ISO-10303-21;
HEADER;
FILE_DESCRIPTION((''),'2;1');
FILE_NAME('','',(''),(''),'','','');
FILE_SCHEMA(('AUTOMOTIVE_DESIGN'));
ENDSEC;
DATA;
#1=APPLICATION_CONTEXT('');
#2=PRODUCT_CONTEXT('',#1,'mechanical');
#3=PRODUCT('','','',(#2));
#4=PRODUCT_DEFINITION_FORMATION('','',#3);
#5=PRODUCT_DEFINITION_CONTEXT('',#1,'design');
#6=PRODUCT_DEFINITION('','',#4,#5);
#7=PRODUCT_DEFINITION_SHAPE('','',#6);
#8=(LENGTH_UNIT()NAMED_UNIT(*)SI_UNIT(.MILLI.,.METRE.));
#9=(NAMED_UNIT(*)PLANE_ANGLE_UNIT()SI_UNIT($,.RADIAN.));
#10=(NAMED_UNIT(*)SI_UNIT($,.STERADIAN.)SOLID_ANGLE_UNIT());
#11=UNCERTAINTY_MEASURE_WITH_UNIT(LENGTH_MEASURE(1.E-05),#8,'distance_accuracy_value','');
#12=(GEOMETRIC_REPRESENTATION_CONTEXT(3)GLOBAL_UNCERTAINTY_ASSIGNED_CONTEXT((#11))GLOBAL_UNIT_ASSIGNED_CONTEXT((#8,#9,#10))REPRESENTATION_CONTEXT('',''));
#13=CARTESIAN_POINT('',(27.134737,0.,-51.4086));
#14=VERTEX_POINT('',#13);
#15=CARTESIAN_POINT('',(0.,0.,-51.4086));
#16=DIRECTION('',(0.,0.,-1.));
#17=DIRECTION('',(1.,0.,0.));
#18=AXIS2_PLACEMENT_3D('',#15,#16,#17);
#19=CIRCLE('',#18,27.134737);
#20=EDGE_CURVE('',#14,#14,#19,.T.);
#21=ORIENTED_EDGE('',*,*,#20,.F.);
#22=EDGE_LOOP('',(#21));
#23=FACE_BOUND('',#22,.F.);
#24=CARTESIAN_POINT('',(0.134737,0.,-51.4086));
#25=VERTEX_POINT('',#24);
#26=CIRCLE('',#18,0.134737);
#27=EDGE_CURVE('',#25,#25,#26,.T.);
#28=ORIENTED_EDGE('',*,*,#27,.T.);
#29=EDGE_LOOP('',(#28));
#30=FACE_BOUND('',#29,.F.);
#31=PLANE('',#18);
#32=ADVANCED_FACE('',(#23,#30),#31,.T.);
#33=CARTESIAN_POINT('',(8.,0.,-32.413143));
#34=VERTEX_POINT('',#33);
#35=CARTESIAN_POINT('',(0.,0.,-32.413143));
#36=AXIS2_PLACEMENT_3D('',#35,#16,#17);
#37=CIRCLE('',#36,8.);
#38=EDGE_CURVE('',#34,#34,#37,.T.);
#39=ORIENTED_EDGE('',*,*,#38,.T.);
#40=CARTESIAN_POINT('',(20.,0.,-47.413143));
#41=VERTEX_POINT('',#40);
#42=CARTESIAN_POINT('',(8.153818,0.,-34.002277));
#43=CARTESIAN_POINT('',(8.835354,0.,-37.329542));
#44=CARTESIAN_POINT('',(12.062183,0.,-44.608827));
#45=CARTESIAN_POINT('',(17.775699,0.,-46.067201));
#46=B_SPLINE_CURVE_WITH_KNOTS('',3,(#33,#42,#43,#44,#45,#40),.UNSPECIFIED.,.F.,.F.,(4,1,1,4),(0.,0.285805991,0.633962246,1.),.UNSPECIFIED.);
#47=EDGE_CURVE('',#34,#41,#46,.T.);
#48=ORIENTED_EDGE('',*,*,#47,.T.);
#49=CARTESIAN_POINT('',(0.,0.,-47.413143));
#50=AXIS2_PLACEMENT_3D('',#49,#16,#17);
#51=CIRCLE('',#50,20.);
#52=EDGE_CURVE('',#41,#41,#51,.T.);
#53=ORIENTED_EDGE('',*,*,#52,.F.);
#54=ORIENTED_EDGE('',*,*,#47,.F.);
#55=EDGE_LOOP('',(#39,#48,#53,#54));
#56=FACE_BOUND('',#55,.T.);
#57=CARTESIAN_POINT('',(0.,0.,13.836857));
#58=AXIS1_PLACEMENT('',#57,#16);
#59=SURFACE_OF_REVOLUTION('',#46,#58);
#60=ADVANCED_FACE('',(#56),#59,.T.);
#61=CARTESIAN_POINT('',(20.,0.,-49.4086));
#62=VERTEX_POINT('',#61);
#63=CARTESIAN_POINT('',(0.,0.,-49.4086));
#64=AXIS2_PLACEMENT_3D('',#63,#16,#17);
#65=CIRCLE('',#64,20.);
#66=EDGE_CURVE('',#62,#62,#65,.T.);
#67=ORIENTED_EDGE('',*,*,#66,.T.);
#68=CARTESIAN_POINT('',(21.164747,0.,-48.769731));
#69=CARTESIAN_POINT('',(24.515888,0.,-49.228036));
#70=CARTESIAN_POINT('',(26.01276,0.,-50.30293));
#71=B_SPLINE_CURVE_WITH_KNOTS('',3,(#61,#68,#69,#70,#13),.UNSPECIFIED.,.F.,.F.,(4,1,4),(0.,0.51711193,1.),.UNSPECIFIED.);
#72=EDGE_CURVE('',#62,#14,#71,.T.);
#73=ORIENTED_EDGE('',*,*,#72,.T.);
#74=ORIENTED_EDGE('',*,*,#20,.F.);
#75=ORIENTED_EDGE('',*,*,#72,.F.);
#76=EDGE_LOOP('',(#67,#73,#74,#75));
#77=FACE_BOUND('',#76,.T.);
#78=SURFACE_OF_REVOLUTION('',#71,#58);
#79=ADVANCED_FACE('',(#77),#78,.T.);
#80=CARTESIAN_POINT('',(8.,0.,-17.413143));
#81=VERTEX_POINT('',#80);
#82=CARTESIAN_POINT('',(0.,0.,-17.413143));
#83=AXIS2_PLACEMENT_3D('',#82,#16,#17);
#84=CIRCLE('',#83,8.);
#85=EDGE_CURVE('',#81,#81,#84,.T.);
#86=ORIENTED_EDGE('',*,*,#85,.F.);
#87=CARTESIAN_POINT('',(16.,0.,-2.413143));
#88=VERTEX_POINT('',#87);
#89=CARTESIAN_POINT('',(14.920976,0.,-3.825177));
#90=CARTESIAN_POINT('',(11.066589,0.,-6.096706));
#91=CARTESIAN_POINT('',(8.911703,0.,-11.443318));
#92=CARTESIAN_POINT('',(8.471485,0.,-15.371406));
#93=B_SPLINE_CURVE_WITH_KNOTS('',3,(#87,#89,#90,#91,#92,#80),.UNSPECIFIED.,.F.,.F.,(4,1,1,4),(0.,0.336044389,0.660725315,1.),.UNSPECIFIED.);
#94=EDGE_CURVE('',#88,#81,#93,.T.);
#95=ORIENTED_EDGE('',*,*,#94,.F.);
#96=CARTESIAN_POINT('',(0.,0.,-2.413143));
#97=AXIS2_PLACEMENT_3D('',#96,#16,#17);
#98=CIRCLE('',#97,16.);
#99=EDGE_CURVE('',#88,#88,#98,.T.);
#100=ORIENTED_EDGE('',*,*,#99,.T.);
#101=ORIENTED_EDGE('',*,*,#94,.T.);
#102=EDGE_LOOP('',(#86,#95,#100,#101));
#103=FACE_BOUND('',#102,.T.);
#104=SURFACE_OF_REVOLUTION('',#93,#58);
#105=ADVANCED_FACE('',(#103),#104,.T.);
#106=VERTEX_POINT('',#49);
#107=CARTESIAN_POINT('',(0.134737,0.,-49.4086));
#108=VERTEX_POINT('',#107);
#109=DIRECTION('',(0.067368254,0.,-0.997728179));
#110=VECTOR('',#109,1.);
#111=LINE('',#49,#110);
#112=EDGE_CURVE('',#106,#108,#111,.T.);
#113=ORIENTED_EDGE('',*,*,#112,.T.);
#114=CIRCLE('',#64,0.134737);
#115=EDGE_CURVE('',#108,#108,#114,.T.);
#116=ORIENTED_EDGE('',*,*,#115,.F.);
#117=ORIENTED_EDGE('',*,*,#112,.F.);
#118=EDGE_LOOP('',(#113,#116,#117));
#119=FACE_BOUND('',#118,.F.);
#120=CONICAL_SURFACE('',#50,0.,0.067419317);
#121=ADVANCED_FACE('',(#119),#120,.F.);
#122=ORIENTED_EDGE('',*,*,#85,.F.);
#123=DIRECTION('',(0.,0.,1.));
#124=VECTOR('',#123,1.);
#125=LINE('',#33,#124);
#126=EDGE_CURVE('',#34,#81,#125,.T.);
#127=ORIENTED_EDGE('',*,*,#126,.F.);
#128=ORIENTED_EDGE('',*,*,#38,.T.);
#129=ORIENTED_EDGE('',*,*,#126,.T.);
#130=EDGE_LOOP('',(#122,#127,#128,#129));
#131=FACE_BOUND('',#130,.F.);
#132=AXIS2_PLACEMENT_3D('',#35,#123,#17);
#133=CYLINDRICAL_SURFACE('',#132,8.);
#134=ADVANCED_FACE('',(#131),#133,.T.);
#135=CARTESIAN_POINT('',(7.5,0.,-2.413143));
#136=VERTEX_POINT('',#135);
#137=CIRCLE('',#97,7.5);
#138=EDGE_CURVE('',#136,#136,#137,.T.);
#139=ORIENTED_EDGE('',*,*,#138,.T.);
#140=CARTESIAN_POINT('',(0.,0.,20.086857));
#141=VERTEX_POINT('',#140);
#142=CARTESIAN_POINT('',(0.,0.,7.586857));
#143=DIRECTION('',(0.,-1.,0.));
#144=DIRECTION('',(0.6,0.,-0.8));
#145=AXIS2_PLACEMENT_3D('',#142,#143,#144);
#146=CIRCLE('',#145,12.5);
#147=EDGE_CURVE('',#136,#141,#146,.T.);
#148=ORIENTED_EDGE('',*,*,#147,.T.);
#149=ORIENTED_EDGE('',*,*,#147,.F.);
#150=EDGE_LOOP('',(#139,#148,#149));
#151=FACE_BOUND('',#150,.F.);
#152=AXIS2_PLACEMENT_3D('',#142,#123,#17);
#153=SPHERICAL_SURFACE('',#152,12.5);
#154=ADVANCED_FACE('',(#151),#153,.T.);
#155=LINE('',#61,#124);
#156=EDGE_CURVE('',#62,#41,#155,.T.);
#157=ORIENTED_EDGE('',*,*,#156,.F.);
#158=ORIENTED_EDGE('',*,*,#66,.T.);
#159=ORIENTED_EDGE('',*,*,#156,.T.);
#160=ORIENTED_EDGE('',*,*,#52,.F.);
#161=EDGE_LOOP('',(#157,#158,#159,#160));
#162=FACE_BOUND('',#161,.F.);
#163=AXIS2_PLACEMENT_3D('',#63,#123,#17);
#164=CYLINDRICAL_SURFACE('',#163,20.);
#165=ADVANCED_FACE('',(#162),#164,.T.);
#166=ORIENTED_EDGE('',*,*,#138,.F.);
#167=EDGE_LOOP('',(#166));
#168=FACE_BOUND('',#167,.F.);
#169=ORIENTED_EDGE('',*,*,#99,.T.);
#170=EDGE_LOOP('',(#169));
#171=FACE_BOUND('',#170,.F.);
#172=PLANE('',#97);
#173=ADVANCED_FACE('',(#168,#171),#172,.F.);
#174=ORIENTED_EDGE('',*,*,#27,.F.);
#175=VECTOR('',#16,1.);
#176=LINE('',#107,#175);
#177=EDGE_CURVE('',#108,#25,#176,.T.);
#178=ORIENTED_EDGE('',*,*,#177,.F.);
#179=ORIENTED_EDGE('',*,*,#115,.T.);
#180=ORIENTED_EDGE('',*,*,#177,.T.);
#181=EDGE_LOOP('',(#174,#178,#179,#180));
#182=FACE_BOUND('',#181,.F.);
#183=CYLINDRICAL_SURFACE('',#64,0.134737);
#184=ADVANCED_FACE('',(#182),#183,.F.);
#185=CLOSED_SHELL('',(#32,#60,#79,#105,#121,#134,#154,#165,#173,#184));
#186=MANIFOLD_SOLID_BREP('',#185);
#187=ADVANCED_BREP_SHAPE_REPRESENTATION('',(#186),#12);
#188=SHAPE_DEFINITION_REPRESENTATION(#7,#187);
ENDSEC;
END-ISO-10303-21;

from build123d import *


# Not quite as in the source:
# - a feature names something its author has since deleted; it is built from what else it names


with BuildPart() as f1:
    # F0 (on Front) → F1 (revolve)
    with BuildSketch(Plane.XZ):
        with BuildLine():
            Line((16, -2.4131433771), (7.5, -2.4131433771))
            ThreePointArc((7.5, -2.4131433771), (11.8585412256, 11.5397036981), (0, 20.0868566229))
            Line((0, 20.0868566229), (0, 7.5868566229))
            Line((0, 7.5868566229), (0, -2.4131433771))
            Line((0, -2.4131433771), (0, -17.4131433771))
            Line((0, -17.4131433771), (0, -32.4131433771))
            Line((0, -32.4131433771), (0, -47.4131433771))
            Line((0, -47.4131433771), (0.1347365081, -49.4085997343))
            Line((0.1347365081, -49.4085997343), (0.1347365081, -51.4085997343))
            Line((0.1347365081, -51.4085997343), (27.1347365081, -51.4085997343))
            add(Edge.make_bspline(
                [(20, -49.4085997343), (21.1647466197, -48.7697309267), (24.5158880863, -49.2280358233), (26.0127596557, -50.3029301763), (27.1347365081, -51.4085997343)],
                knots=[0, 0, 0, 0, 0.5171119301, 1, 1, 1, 1], degree=3))
            Line((20, -49.4085997343), (20, -47.4131433771))
            add(Edge.make_bspline(
                [(8, -32.4131433771), (8.1538179197, -34.0022767405), (8.8353543612, -37.329541577), (12.0621827681, -44.6088268089), (17.7756990209, -46.0672005111), (20, -47.4131433771)],
                knots=[0, 0, 0, 0, 0.2858059908, 0.6339622457, 1, 1, 1, 1], degree=3))
            Line((8, -32.4131433771), (8, -17.4131433771))
            add(Edge.make_bspline(
                [(16, -2.4131433771), (14.9209762915, -3.8251770696), (11.0665886907, -6.0967064809), (8.9117025522, -11.4433176222), (8.4714845406, -15.3714061946), (8, -17.4131433771)],
                knots=[0, 0, 0, 0, 0.3360443888, 0.6607253154, 1, 1, 1, 1], degree=3))
        make_face()
    revolve(axis=Axis((0, 0, 13.8368566229), (0, 0, -1)))


solid = f1.part
